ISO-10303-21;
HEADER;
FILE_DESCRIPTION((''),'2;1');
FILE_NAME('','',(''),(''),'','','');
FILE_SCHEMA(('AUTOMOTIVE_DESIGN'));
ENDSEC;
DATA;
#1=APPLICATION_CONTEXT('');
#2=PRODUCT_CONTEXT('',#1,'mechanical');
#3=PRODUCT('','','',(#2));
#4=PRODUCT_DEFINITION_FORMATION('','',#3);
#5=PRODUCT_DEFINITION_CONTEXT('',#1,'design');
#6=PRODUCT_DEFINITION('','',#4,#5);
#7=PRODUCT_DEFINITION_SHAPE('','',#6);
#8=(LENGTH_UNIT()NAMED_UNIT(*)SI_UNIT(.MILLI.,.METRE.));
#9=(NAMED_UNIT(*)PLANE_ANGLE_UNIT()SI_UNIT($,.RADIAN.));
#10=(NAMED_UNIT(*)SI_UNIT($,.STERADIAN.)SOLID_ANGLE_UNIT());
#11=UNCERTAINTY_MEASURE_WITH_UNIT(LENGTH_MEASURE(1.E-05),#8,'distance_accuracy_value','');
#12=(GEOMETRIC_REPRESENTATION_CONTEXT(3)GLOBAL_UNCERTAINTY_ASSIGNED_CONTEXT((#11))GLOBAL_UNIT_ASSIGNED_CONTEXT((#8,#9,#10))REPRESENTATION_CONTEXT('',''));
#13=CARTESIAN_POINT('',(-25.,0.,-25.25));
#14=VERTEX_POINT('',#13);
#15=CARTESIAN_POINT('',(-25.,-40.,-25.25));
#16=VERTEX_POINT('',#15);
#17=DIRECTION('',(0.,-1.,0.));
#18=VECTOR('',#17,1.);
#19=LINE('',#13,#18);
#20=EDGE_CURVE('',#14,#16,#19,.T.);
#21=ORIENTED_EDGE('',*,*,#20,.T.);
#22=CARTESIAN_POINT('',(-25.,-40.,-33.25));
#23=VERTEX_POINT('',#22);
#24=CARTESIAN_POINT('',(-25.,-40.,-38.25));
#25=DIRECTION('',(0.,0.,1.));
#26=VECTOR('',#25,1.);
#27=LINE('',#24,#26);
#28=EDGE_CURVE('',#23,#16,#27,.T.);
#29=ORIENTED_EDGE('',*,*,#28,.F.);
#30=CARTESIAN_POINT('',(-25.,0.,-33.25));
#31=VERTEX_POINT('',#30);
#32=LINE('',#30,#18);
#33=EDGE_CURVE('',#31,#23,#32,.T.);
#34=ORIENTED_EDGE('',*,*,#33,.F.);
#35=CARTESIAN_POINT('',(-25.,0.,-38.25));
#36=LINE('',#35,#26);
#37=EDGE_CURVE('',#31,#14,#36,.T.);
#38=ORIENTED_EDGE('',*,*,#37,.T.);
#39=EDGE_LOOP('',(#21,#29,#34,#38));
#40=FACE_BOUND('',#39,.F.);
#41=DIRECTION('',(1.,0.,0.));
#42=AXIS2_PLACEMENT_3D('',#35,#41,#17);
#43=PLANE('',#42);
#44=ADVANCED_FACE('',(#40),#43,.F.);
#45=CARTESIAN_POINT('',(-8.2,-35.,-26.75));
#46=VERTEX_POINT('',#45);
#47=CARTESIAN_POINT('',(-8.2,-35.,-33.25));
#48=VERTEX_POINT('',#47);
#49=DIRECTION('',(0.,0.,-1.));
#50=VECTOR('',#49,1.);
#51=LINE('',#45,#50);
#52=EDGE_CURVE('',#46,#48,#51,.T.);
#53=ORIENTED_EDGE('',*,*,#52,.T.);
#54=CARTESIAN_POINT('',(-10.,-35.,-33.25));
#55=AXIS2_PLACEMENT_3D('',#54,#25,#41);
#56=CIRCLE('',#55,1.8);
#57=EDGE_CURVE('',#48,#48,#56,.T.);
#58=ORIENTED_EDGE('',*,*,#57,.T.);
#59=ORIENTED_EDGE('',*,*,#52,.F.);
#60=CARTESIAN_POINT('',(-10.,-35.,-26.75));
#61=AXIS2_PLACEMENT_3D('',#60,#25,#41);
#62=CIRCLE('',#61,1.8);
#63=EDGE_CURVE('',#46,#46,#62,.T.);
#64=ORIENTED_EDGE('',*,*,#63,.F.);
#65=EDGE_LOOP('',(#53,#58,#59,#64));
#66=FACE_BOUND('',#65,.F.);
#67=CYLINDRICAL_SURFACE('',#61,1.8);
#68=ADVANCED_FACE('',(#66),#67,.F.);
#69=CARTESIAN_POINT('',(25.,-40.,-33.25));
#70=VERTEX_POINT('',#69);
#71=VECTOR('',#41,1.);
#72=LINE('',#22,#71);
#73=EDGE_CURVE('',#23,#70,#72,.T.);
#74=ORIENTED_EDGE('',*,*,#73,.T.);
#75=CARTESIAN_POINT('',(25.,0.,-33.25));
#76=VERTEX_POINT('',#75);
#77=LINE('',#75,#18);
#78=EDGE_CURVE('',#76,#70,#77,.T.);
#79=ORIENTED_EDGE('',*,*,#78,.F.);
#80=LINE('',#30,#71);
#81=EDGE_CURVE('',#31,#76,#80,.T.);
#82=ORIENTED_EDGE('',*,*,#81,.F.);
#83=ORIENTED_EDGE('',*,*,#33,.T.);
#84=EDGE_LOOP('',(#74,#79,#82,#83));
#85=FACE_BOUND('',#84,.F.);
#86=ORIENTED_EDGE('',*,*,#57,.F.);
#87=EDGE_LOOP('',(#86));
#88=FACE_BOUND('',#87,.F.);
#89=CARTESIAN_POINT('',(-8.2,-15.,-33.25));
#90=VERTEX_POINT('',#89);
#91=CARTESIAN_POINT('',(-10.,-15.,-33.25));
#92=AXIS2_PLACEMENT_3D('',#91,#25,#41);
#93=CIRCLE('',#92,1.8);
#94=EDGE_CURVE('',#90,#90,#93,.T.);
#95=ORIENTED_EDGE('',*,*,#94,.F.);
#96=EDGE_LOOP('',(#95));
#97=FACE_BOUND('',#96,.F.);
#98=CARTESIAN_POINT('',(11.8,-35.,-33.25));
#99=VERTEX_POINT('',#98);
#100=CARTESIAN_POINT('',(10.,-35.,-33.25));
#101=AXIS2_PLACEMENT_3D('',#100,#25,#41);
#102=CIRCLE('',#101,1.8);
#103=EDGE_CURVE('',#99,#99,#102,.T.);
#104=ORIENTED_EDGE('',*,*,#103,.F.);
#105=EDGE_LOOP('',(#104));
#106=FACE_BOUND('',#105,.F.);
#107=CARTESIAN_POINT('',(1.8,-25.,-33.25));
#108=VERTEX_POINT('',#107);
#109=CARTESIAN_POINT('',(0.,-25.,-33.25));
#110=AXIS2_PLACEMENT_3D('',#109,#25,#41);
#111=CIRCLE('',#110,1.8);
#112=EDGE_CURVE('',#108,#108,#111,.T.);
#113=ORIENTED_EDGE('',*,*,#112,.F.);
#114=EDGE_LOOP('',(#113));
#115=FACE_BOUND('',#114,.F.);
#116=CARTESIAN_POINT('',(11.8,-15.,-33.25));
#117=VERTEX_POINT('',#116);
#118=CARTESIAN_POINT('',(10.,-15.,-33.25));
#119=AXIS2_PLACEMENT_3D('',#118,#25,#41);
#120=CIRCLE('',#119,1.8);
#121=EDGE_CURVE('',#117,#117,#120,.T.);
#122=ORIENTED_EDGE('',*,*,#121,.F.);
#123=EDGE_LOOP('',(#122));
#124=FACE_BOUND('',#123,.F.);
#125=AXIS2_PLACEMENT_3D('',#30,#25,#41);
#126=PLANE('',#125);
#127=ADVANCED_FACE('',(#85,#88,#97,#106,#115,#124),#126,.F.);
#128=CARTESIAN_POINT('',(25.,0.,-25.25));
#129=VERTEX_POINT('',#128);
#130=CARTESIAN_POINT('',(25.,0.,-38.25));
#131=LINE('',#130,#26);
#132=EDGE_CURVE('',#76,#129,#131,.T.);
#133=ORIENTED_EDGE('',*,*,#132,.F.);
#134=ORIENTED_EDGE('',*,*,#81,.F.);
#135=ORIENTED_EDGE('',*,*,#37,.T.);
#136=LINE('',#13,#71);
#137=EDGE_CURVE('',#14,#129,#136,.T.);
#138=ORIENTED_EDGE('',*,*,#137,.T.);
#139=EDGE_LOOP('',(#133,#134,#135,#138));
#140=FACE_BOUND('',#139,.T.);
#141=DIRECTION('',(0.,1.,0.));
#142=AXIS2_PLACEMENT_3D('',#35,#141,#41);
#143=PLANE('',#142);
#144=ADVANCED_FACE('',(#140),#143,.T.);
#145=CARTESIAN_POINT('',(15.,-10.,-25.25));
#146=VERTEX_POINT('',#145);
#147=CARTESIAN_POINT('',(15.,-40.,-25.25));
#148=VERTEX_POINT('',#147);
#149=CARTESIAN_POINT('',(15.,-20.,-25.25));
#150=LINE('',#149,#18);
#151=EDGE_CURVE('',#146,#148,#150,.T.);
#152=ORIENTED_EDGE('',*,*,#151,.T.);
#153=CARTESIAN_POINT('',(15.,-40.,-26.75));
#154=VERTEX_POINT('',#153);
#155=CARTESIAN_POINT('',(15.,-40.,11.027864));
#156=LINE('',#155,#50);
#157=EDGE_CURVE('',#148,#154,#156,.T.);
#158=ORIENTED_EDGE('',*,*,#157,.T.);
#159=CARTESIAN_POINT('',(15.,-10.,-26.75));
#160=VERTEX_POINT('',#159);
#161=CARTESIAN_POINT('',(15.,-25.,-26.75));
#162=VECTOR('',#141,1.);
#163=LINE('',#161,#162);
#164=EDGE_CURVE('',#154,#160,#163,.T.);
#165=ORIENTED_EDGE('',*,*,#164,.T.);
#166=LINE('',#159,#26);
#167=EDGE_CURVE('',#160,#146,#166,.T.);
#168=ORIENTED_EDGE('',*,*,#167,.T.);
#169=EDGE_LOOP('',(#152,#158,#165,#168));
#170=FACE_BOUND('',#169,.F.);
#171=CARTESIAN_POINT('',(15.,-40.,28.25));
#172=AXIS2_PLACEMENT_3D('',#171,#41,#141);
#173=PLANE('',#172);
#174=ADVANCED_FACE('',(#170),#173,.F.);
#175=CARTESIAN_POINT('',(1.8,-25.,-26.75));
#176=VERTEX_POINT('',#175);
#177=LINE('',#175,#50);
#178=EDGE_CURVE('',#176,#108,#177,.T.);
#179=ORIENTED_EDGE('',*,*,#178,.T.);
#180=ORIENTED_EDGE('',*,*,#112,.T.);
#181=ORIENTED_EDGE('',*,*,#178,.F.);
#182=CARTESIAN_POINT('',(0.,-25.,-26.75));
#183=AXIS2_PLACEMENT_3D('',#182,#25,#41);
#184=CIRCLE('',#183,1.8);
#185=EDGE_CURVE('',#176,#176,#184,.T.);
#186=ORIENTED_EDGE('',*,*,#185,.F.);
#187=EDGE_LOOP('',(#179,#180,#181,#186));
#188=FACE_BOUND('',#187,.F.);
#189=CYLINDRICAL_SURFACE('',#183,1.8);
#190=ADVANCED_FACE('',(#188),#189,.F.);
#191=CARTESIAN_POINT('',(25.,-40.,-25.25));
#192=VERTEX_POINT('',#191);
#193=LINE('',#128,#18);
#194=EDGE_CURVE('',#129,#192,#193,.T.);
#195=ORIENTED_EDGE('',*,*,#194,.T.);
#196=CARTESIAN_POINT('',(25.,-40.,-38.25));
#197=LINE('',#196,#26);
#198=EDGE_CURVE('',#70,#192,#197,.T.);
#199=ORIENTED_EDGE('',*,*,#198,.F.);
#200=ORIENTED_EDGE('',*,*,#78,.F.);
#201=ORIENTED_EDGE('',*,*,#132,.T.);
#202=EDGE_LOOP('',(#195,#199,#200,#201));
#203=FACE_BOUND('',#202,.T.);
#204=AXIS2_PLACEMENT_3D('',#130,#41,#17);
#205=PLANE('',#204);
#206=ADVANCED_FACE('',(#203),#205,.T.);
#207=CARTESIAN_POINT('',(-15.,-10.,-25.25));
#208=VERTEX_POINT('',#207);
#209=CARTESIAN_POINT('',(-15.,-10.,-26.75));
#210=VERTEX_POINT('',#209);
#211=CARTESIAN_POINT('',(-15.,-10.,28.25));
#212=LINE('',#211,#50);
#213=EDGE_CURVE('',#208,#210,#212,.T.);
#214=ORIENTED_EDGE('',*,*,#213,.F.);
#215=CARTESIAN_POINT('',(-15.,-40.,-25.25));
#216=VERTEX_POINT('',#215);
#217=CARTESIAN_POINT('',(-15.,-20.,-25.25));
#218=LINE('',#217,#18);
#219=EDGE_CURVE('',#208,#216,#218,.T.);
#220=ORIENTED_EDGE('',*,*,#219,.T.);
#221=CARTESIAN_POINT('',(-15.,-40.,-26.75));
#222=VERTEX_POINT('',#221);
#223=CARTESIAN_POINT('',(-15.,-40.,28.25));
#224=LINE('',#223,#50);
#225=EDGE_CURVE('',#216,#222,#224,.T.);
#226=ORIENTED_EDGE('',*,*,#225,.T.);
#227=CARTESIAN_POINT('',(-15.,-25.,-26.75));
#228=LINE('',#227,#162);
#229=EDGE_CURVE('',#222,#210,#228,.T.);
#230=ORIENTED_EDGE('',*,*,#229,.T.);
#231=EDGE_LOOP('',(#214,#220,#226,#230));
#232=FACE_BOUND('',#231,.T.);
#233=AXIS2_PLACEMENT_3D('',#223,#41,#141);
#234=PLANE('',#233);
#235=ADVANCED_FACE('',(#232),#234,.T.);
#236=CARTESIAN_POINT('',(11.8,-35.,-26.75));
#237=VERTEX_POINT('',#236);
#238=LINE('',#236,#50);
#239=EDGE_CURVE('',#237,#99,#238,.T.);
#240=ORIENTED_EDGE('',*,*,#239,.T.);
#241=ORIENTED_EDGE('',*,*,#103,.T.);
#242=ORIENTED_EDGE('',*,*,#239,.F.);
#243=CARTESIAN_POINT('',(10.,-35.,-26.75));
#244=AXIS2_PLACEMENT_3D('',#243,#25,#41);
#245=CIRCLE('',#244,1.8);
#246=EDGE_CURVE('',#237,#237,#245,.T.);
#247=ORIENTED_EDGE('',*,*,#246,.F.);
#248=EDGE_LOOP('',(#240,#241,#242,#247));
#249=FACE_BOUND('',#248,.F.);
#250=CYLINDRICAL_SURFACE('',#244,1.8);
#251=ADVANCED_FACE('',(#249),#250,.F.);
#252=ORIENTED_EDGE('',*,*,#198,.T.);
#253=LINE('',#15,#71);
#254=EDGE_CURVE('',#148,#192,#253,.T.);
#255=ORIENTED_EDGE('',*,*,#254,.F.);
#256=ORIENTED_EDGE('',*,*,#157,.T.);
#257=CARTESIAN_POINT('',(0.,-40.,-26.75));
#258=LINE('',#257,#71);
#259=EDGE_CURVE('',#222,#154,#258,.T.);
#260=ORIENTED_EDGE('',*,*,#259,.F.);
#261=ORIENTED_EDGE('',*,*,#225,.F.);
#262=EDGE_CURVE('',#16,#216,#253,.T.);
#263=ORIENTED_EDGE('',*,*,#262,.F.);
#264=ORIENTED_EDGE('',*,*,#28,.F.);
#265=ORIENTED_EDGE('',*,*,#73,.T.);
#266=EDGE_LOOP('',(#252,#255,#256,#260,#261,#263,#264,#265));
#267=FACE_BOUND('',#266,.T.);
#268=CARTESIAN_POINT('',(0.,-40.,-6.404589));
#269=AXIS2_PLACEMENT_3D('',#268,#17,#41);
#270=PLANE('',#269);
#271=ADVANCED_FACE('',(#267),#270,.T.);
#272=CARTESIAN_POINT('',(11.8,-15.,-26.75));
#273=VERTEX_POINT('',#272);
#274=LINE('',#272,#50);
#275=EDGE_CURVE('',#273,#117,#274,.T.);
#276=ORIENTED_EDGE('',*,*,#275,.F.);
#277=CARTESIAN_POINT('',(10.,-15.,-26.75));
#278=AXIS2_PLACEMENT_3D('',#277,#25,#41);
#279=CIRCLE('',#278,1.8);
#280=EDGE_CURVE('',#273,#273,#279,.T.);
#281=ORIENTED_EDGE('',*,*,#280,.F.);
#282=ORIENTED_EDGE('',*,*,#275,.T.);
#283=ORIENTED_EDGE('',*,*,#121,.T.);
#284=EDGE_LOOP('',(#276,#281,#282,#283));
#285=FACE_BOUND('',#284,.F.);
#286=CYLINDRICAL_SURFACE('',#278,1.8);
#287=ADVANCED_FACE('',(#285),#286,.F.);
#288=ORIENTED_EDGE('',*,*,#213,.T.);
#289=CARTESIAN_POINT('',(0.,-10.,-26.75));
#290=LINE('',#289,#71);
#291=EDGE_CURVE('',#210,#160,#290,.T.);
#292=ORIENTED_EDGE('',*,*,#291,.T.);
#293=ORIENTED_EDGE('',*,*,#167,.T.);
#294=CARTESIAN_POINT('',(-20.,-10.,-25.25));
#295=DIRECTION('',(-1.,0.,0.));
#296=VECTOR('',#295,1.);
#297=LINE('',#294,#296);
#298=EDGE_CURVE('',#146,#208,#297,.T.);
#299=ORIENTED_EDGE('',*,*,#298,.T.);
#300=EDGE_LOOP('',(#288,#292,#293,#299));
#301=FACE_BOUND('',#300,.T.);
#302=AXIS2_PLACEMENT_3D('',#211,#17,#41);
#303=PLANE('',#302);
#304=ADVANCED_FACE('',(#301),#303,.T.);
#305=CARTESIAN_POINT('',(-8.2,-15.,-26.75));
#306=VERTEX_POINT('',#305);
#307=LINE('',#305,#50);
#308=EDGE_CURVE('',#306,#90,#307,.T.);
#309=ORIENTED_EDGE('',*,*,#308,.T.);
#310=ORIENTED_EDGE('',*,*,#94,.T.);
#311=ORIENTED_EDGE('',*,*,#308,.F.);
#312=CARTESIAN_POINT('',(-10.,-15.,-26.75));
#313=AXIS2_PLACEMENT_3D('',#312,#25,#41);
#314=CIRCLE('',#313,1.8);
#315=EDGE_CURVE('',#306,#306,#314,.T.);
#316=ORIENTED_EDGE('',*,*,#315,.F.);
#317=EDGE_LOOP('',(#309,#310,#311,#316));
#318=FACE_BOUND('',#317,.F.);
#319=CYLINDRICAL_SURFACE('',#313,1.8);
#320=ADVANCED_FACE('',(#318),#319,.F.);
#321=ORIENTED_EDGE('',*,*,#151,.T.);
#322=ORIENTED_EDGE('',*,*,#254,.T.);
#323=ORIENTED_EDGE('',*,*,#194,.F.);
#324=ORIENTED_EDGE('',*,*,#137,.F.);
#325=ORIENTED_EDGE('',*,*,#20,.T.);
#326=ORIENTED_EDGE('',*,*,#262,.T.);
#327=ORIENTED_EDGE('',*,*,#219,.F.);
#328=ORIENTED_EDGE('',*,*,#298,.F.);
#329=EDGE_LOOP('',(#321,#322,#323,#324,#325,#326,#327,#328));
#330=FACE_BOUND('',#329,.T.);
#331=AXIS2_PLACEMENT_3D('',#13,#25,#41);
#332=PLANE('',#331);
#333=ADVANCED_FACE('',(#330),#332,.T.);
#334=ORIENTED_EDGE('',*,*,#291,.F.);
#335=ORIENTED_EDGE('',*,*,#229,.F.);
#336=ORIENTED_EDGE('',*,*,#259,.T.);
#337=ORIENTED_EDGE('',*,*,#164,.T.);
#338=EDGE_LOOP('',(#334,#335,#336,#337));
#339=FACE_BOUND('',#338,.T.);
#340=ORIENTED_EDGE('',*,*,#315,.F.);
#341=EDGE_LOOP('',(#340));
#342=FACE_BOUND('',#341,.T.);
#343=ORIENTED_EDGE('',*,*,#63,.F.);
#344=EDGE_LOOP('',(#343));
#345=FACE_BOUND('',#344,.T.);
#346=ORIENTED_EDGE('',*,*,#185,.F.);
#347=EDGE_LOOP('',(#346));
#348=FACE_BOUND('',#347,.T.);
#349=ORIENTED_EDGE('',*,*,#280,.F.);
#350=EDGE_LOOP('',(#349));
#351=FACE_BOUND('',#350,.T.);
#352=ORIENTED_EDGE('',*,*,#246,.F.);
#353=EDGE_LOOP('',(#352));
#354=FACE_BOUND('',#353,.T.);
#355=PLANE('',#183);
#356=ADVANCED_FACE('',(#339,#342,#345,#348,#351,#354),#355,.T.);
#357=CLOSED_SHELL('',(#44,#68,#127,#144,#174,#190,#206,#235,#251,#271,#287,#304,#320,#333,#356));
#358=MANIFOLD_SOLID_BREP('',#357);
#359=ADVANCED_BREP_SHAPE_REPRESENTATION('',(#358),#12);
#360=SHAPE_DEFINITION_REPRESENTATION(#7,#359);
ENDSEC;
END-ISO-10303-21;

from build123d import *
from build123d import SkipClean  # not in build123d's __all__

# Parameters (mm, degrees)
F0_R      = 2.85
F0_R_2    = 11
F1_DEPTH  = 40
F2_W      = 30
F2_H      = 30
F3_DEPTH  = 55
F5_DEPTH  = 30
F6_DEPTH  = 40.001
F7_DEPTH  = 40.001
F8_R      = 1.8
F9_DEPTH  = 11.5
F10_DEPTH = 13
F11_DEPTH = 5


with BuildPart() as f1:
    # F0 (on Front) → F1 (new body)
    with BuildSketch(Plane.XZ):
        with BuildLine():
            Line((15, 28.25), (-15, 28.25))
            ThreePointArc((-15, 28.25), (-22.0710678119, 25.3210678119), (-25, 18.25))
            Line((-25, 18.25), (-25, -38.25))
            Line((-25, -38.25), (25, -38.25))
            Line((25, -38.25), (25, 18.25))
            ThreePointArc((25, 18.25), (22.0710678119, 25.3210678119), (15, 28.25))
        make_face()
        with Locations((0, -18.25)):
            Circle(F0_R, mode=Mode.SUBTRACT)
        Circle(F0_R_2, mode=Mode.SUBTRACT)
        with Locations((0, 18.25)):
            Circle(F0_R, mode=Mode.SUBTRACT)
    extrude(amount=F1_DEPTH)

    # F2 (on face) → F3 (cut)
    with BuildSketch(Plane.XY.offset(28.25)):
        with Locations((0, -25)):
            Rectangle(F2_W, F2_H)
    extrude(amount=-F3_DEPTH, mode=Mode.SUBTRACT)

    # F4 (on face) → F5 (join, through all)
    with BuildSketch(Plane.XZ.offset(40)):
        with BuildLine():
            Line((-15, 17.2291616466), (-15, 19.972135955))
            ThreePointArc((-15, 19.972135955), (-20, 15.5), (-15, 11.027864045))
            Line((-15, 11.027864045), (-15, 13.7708383534))
            ThreePointArc((-15, 13.7708383534), (-17.3, 15.5), (-15, 17.2291616466))
        make_face()
        with BuildLine():
            Line((-15, -17.2291616466), (-15, -19.972135955))
            ThreePointArc((-15, -19.972135955), (-12.1458980338, -18.5), (-11, -15.5))
            ThreePointArc((-11, -15.5), (-12.1458980338, -12.5), (-15, -11.027864045))
            Line((-15, -11.027864045), (-15, -13.7708383534))
            ThreePointArc((-15, -13.7708383534), (-14.061250543, -14.4183346174), (-13.7, -15.5))
            ThreePointArc((-13.7, -15.5), (-14.061250543, -16.5816653826), (-15, -17.2291616466))
        make_face()
        with BuildLine():
            ThreePointArc((20, -15.5), (18.5, -12.1458980338), (15, -11.027864045))
            Line((15, -11.027864045), (15, -13.7708383534))
            ThreePointArc((15, -13.7708383534), (16.5816653826, -14.061250543), (17.3, -15.5))
            ThreePointArc((17.3, -15.5), (16.5816653826, -16.938749457), (15, -17.2291616466))
            Line((15, -17.2291616466), (15, -19.972135955))
            ThreePointArc((15, -19.972135955), (18.5, -18.8541019662), (20, -15.5))
        make_face()
        with BuildLine():
            Line((15, 17.2291616466), (15, 19.972135955))
            ThreePointArc((15, 19.972135955), (11, 15.5), (15, 11.027864045))
            Line((15, 11.027864045), (15, 13.7708383534))
            ThreePointArc((15, 13.7708383534), (13.7, 15.5), (15, 17.2291616466))
        make_face()
    extrude(amount=-F5_DEPTH)

    # F4 (on face) → F6 (cut, through all)
    with BuildSketch(Plane.XZ.offset(40)):
        with BuildLine():
            ThreePointArc((-13.7, 15.5), (-14.061250543, 16.5816653826), (-15, 17.2291616466))
            Line((-15, 17.2291616466), (-15, 13.7708383534))
            ThreePointArc((-15, 13.7708383534), (-14.061250543, 14.4183346174), (-13.7, 15.5))
        make_face()
        with BuildLine():
            ThreePointArc((17.3, 15.5), (16.5816653826, 16.938749457), (15, 17.2291616466))
            Line((15, 17.2291616466), (15, 13.7708383534))
            ThreePointArc((15, 13.7708383534), (16.5816653826, 14.061250543), (17.3, 15.5))
        make_face()
        with BuildLine():
            Line((15, -17.2291616466), (15, -13.7708383534))
            ThreePointArc((15, -13.7708383534), (13.7, -15.5), (15, -17.2291616466))
        make_face()
        with BuildLine():
            ThreePointArc((-15, -13.7708383534), (-17.3, -15.5), (-15, -17.2291616466))
            Line((-15, -17.2291616466), (-15, -13.7708383534))
        make_face()
    with SkipClean():  # cleaning this boolean's faces spoils the solid; the shape is the same uncleaned
        extrude(amount=-F6_DEPTH, mode=Mode.SUBTRACT)

    # F4 (on face) → F7 (cut, through all)
    with BuildSketch(Plane.XZ.offset(40)):
        with BuildLine():
            Line((-15, 13.7708383534), (-15, 17.2291616466))
            ThreePointArc((-15, 17.2291616466), (-17.3, 15.5), (-15, 13.7708383534))
        make_face()
        with BuildLine():
            Line((15, 13.7708383534), (15, 17.2291616466))
            ThreePointArc((15, 17.2291616466), (13.7, 15.5), (15, 13.7708383534))
        make_face()
        with BuildLine():
            Line((-15, -13.7708383534), (-15, -17.2291616466))
            ThreePointArc((-15, -17.2291616466), (-14.061250543, -16.5816653826), (-13.7, -15.5))
            ThreePointArc((-13.7, -15.5), (-14.061250543, -14.4183346174), (-15, -13.7708383534))
        make_face()
        with BuildLine():
            ThreePointArc((17.3, -15.5), (16.5816653826, -14.061250543), (15, -13.7708383534))
            Line((15, -13.7708383534), (15, -17.2291616466))
            ThreePointArc((15, -17.2291616466), (16.5816653826, -16.938749457), (17.3, -15.5))
        make_face()
    with SkipClean():  # cleaning this boolean's faces spoils the solid; the shape is the same uncleaned
        extrude(amount=-F7_DEPTH, mode=Mode.SUBTRACT)

    # F8 (on face) → F9 (cut, through all)
    with BuildSketch(Plane.XY.offset(-26.75)):
        with Locations((-10, -15)):
            Circle(F8_R)
        with Locations((10, -15)):
            Circle(F8_R)
        with Locations((-10, -35)):
            Circle(F8_R)
        with Locations((10, -35)):
            Circle(F8_R)
        with Locations((0, -25)):
            Circle(F8_R)
    extrude(amount=-F9_DEPTH, mode=Mode.SUBTRACT)

    # F10 (intersect): a face of the model
    f10_faces = [f1.faces().sort_by_distance(p)[0] for p in [
        (0, -19.8694432325, -38.25),
    ]]
    extrude(f10_faces, amount=-F10_DEPTH, mode=Mode.INTERSECT)

    # F11 (cut): a face of the model
    f11_faces = [f1.faces().sort_by_distance(p)[0] for p in [
        (0, -19.8694432325, -38.25),
    ]]
    extrude(f11_faces, amount=-F11_DEPTH, mode=Mode.SUBTRACT)


solid = f1.part
